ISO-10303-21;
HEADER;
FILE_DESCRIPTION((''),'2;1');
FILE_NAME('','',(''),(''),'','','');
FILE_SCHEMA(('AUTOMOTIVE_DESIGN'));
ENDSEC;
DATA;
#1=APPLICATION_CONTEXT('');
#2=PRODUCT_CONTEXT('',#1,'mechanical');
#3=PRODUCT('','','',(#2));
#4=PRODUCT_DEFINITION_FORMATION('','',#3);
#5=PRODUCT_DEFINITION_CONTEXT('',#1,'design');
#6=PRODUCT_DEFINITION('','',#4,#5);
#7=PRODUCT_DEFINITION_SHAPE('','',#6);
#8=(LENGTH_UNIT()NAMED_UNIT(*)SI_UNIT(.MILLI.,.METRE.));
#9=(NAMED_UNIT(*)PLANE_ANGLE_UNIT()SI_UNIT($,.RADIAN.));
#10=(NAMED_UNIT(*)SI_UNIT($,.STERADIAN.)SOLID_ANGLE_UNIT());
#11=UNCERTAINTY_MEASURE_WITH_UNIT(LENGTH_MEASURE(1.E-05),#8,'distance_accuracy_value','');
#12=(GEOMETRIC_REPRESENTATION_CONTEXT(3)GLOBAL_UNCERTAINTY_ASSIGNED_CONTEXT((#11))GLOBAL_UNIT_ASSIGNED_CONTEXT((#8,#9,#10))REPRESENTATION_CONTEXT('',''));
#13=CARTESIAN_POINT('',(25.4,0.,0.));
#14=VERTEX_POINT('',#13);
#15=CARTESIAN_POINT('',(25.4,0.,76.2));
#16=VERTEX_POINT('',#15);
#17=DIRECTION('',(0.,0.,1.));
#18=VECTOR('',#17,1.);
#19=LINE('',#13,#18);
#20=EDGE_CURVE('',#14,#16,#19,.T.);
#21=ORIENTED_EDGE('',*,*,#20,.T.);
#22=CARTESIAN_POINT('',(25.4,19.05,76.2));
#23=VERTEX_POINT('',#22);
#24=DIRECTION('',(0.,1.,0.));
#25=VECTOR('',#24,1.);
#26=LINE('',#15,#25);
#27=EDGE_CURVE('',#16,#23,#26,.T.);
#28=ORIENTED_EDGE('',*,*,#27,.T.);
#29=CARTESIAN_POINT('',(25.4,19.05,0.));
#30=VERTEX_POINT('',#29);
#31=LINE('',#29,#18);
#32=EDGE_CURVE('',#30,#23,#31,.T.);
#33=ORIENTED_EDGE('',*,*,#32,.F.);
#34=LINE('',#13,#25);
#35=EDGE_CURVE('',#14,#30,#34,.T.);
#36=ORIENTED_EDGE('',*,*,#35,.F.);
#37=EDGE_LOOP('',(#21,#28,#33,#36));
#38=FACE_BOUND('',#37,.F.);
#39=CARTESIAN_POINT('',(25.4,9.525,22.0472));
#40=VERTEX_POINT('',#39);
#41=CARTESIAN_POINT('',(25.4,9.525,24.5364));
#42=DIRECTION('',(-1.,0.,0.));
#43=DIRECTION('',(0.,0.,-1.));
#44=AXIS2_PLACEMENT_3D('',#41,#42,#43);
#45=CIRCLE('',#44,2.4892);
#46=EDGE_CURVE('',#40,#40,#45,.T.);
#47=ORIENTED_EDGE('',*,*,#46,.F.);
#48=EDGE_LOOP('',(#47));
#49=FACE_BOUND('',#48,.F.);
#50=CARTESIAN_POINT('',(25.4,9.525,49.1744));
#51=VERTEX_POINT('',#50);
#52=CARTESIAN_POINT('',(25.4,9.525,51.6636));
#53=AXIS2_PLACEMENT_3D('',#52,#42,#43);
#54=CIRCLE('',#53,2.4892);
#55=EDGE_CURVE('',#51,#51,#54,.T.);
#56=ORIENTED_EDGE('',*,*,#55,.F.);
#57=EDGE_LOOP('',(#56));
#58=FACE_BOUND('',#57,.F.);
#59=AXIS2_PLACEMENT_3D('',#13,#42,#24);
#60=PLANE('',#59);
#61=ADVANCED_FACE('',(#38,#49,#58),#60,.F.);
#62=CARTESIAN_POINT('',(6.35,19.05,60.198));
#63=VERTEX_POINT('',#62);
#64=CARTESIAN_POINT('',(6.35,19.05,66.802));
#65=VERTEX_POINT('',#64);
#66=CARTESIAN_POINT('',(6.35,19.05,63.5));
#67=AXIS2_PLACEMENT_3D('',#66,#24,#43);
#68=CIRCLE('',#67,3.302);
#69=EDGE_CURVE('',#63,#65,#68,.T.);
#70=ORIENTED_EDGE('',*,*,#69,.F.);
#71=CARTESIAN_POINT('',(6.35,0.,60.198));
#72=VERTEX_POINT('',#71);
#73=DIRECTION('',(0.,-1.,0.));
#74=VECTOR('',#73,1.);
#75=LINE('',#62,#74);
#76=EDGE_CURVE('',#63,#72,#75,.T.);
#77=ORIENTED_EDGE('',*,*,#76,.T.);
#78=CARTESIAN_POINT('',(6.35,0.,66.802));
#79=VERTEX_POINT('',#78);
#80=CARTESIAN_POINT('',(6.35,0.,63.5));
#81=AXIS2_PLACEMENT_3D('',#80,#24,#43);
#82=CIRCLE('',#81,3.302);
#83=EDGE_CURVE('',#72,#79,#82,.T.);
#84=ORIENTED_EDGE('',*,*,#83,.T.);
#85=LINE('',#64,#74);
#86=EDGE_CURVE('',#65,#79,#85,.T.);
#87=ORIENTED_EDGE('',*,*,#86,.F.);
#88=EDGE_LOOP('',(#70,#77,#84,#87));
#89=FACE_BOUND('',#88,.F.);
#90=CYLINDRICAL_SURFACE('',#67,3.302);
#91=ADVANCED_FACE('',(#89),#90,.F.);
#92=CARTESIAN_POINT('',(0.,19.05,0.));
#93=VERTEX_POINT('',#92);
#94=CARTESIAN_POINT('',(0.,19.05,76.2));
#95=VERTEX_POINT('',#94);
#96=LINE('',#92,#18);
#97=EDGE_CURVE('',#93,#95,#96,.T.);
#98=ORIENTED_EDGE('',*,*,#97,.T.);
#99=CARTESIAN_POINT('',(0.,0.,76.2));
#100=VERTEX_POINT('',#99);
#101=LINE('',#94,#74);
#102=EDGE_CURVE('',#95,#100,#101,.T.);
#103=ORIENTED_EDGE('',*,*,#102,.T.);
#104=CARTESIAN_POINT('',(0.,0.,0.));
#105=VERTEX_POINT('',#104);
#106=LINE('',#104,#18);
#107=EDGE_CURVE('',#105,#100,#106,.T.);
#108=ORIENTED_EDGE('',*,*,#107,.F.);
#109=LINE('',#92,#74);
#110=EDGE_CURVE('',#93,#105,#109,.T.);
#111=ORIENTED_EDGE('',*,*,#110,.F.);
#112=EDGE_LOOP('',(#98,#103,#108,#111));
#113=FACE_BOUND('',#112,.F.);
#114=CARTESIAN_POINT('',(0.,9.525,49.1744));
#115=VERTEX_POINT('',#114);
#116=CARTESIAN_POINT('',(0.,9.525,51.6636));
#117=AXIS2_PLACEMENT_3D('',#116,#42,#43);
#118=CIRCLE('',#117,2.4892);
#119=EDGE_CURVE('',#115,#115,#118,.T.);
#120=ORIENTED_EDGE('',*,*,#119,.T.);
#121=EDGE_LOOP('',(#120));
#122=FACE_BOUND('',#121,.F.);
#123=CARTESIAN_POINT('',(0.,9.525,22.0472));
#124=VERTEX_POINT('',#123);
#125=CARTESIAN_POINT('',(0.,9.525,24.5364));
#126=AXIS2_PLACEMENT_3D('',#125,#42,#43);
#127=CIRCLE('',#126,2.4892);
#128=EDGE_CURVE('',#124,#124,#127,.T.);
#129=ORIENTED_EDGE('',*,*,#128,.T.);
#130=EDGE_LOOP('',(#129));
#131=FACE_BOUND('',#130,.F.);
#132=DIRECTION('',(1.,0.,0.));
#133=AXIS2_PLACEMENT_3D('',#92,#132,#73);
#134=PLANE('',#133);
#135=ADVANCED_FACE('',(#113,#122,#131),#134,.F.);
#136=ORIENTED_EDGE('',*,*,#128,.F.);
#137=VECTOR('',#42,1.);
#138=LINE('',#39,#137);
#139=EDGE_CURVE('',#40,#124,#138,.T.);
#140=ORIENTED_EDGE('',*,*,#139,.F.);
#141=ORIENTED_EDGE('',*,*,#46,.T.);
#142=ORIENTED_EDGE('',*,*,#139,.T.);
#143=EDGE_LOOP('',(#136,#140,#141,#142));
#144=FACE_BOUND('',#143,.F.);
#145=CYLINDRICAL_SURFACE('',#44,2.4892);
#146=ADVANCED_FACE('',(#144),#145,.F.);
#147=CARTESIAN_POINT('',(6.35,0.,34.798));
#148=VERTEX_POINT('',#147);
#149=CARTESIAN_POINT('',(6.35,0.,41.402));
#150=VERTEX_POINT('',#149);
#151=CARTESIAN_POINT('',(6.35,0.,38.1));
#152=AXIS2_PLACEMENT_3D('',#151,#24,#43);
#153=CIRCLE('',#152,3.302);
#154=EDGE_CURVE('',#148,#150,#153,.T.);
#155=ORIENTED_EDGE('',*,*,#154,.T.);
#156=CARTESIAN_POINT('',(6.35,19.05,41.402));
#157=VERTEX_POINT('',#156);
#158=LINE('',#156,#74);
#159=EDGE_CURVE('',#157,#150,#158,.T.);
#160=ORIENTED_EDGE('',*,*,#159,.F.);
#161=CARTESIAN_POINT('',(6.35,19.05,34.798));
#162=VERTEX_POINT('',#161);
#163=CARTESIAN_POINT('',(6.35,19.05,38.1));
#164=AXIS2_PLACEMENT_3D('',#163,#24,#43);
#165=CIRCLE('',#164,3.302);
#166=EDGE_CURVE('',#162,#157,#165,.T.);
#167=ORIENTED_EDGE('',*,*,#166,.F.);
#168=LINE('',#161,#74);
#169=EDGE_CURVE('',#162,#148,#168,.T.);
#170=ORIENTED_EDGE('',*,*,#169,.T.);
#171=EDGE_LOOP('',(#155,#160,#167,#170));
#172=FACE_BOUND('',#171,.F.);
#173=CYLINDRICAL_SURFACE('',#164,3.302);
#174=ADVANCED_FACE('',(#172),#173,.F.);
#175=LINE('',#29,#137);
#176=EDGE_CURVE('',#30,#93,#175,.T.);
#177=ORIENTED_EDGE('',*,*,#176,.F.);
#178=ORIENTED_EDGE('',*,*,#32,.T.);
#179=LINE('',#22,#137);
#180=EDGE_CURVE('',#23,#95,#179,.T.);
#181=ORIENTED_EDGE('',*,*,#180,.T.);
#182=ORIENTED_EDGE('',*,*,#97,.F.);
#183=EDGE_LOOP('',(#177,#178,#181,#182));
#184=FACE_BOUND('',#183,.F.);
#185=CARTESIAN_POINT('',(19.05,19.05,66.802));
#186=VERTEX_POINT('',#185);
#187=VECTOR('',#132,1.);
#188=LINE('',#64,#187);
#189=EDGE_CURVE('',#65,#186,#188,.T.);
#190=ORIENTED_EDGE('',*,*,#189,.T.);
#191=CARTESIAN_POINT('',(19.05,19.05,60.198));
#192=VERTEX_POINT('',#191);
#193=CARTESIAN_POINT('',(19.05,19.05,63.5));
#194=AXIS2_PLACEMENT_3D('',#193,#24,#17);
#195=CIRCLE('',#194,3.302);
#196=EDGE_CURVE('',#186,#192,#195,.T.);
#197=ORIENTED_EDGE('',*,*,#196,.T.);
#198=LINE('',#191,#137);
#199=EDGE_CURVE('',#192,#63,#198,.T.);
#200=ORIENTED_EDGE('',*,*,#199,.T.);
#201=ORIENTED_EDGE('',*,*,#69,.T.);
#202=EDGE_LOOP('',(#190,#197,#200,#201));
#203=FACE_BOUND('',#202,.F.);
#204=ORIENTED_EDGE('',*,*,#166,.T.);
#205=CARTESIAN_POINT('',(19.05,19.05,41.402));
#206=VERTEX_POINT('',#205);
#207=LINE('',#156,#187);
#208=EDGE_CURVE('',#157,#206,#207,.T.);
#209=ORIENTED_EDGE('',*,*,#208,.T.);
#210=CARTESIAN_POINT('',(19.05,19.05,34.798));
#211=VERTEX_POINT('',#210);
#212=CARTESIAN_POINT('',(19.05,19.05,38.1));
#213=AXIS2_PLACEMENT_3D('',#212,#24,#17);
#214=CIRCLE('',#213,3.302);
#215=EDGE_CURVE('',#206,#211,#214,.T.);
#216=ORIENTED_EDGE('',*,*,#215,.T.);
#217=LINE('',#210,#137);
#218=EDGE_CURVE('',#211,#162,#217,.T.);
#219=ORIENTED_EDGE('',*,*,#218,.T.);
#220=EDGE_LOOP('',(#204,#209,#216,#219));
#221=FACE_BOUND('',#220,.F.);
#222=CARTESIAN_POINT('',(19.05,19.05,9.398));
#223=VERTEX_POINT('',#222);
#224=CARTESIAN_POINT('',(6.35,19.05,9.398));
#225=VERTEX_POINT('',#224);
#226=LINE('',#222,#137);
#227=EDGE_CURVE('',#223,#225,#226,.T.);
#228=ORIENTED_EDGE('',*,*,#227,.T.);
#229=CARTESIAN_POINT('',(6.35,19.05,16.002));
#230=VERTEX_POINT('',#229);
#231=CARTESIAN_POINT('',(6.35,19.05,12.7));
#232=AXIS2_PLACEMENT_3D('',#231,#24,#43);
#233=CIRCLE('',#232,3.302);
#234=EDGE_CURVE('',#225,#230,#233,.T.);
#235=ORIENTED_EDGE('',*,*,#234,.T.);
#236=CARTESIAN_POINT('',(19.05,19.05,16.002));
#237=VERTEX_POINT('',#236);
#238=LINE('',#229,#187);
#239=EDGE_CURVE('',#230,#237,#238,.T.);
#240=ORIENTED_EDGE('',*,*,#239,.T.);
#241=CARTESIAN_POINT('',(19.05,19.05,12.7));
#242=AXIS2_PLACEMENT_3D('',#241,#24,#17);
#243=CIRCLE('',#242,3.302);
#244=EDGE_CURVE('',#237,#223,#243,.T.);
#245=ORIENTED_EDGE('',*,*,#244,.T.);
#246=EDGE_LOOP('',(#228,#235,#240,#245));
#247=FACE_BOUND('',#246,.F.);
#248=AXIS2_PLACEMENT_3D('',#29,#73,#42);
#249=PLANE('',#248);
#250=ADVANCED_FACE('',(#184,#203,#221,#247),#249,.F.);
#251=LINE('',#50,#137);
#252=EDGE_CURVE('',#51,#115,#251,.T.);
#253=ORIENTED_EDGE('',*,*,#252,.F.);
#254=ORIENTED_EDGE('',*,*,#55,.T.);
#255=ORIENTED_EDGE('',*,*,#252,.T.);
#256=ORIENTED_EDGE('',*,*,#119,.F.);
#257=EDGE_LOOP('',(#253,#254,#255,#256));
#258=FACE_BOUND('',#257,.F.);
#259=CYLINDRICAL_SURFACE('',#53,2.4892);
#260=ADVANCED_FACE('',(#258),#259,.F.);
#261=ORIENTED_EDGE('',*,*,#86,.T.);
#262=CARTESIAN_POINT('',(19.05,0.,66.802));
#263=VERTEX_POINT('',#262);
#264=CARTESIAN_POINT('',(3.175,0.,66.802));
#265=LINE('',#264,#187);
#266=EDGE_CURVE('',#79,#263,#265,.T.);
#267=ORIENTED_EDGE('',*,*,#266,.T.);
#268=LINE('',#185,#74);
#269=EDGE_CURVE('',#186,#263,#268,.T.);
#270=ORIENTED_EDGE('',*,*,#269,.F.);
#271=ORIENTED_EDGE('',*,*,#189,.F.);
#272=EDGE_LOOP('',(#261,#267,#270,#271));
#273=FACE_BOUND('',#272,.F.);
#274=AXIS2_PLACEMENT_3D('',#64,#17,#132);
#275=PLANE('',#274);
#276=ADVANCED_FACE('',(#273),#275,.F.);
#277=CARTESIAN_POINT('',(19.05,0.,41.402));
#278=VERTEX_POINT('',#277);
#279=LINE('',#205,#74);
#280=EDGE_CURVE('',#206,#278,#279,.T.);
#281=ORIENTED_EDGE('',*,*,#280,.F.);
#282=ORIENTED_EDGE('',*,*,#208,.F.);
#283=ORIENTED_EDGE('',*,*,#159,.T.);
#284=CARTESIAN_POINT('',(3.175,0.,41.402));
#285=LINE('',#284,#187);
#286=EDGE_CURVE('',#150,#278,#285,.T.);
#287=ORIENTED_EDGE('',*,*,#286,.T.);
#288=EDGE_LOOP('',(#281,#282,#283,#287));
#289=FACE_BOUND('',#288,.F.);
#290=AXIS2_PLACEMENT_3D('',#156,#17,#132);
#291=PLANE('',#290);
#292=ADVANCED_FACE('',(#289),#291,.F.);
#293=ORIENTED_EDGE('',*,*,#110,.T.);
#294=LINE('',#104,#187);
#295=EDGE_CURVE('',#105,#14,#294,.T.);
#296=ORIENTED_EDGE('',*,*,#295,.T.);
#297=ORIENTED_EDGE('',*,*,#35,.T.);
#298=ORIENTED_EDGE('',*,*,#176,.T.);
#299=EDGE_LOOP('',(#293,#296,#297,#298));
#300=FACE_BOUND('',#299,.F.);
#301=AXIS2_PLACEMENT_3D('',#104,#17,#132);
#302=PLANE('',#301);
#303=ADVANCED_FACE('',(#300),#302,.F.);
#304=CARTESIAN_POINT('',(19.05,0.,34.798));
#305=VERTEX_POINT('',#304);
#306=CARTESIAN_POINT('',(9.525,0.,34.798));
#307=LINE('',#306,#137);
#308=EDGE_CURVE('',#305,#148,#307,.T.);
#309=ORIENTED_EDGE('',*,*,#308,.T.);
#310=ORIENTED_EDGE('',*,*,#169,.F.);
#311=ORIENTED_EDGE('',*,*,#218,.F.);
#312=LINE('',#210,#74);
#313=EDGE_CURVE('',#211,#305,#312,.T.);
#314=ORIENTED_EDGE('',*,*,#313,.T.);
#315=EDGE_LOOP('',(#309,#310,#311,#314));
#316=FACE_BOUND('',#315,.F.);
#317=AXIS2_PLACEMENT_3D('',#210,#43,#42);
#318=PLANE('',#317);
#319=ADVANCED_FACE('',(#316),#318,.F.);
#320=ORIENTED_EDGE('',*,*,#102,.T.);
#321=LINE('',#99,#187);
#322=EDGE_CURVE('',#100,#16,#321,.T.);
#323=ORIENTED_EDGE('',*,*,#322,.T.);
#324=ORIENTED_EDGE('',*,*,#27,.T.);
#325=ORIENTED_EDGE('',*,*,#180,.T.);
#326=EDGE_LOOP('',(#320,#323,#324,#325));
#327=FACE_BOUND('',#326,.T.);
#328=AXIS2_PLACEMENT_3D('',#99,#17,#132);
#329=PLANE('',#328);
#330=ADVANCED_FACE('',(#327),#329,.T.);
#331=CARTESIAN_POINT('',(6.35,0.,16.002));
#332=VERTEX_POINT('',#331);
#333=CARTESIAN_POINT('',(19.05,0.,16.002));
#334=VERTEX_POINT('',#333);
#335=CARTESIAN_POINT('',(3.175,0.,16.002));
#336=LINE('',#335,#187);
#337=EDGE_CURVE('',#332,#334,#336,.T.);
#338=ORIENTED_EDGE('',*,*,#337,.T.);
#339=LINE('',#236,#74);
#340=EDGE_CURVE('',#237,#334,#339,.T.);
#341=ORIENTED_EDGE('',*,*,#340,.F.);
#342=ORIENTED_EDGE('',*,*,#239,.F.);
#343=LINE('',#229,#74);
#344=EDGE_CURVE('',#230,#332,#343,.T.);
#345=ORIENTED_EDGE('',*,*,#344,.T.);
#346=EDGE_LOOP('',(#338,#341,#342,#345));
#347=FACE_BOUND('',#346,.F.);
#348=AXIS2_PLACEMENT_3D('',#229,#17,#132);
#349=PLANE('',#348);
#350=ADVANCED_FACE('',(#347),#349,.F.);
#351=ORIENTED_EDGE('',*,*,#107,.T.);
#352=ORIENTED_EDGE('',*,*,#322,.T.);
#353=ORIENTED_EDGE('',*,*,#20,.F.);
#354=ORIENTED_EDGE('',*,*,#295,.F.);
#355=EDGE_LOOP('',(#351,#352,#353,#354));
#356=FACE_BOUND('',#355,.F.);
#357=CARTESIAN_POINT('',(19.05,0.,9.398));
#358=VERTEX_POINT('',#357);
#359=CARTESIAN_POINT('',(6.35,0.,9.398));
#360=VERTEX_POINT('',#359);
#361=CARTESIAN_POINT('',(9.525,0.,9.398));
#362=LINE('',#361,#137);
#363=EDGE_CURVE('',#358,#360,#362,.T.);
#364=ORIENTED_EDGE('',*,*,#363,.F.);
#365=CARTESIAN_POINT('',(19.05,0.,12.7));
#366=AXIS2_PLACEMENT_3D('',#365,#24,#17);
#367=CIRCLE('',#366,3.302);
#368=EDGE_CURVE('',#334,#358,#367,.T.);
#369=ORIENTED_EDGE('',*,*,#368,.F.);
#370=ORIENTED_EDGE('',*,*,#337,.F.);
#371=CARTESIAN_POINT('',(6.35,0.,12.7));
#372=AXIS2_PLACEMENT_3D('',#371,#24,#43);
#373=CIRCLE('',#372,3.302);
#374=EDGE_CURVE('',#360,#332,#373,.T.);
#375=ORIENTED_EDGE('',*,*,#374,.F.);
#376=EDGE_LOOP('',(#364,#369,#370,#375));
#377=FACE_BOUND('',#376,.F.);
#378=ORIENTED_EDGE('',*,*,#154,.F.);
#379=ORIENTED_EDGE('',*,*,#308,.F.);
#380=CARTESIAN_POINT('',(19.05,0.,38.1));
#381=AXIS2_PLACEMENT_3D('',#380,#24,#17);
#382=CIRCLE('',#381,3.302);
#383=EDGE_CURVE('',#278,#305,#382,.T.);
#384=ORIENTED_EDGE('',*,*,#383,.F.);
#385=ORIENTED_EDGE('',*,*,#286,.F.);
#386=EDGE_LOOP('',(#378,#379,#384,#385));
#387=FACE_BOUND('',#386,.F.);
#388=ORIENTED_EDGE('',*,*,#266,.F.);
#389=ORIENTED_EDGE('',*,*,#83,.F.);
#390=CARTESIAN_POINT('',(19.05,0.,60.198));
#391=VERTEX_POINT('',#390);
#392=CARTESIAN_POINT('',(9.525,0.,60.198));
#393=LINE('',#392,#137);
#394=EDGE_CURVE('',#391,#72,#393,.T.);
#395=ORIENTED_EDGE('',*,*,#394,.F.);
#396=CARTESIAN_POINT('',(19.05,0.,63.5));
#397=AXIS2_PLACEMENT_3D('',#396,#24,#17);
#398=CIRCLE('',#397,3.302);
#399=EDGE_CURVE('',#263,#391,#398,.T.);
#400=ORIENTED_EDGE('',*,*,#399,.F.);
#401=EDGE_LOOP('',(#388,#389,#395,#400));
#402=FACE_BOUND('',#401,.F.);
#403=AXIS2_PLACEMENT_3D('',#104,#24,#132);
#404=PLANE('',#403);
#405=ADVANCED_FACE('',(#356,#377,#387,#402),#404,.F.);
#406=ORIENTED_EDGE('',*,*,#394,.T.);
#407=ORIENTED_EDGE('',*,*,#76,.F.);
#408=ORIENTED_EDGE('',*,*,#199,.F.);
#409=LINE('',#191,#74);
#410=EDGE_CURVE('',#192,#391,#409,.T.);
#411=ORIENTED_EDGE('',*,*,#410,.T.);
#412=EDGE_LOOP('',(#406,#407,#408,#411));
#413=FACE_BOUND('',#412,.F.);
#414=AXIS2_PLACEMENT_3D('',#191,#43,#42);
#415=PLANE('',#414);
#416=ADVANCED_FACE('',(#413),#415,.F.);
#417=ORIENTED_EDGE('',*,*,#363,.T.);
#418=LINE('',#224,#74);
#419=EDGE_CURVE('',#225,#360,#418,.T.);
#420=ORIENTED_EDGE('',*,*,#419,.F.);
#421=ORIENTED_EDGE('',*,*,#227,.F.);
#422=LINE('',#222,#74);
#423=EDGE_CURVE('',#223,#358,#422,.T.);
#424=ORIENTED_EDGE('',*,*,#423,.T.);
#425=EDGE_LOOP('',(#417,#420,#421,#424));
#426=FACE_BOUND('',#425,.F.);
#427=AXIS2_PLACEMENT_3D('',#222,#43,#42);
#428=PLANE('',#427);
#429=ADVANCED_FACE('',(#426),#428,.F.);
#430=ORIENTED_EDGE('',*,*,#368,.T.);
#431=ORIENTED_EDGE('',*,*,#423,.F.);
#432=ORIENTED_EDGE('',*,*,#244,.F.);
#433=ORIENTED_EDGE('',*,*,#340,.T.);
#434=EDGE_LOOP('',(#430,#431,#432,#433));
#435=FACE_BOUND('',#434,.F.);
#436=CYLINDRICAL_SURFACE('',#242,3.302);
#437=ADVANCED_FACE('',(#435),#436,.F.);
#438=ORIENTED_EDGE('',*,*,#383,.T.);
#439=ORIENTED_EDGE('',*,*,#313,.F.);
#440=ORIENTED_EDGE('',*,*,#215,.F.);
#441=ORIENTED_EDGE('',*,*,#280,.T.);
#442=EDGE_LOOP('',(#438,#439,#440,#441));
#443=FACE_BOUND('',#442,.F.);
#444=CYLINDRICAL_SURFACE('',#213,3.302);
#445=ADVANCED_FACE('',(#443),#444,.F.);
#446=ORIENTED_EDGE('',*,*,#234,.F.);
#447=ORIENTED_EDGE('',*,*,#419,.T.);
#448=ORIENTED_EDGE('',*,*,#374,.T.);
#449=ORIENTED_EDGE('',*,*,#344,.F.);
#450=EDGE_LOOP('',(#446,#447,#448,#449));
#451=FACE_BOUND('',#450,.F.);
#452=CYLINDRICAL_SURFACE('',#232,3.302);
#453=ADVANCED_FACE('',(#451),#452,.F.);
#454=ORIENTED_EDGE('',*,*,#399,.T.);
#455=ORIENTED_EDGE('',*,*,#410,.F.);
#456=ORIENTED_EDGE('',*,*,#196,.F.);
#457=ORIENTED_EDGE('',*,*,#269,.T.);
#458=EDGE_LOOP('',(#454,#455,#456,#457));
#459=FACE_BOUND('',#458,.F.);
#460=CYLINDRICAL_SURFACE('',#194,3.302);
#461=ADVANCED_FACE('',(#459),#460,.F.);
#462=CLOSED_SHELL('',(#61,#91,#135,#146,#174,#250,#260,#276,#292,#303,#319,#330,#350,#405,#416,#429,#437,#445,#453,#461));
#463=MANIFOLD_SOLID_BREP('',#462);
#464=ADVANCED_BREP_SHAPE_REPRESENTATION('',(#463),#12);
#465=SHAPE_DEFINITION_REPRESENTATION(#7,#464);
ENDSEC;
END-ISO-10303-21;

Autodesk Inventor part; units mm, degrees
ref_plane "YZ Plane" through (0, 0, 0) normal (1, 0, 0) x (0, 1, 0)
ref_plane "XZ Plane" through (0, 0, 0) normal (0, 1, 0) x (-1, 0, 0)
ref_plane "XY Plane" through (0, 0, 0) normal (0, 0, 1) x (1, 0, 0)
sketch "Sketch1" plane through (0, 0, 0) normal (0, 0, 1) x (1, 0, 0)
  line L0 (0, 0) -> (25.4, 0)
  line L1 (25.4, 0) -> (25.4, 19.05)
  line L2 (25.4, 19.05) -> (0, 19.05)
  line L3 (0, 19.05) -> (0, 0)
  dimension "d0" = 25.4
  dimension "d1" = 19.05
extrude "Stock Bar" add sketch "Sketch1" along normal blind 76.2
sketch "Sketch2" plane through (25.4, 0, 0) normal (1, 0, 0) x (0, 0, -1)
  line L0 (0, 0) -> (0, 19.05) projected
  line L1 (0, 19.05) -> (-76.2, 19.05) projected
  point P0 (-51.6636, 9.525)
  point P1 (-24.5364, 9.525)
  dimension "d4" = 27.1272
  dimension "d6" = 9.525
  dimension "d7" = 9.525
  dimension "d29" = 24.5364
hole "Motor Support Mounting Holes" at (25.4, 9.525, 51.6636) at (25.4, 9.525, 24.5364) direction (-1, 0, 0) diameter 4.9784 end up to surface thread size "1/4-20 UNC" class "2B" standard "ANSI Unified Screw Threads"
sketch "Sketch3" plane through (0, 19.05, 0) normal (0, 1, 0) x (1, 0, 0)
  line L0 (6.35, -12.7) -> (19.05, -12.7) construction
  line L1 (6.35, -16.002) -> (19.05, -16.002)
  line L2 (19.05, -9.398) -> (6.35, -9.398)
  arc A0 (6.35, -9.398) -> (6.35, -16.002) centre (6.35, -12.7) ccw
  arc A1 (19.05, -16.002) -> (19.05, -9.398) centre (19.05, -12.7) ccw
  line L3 (6.35, -63.5) -> (19.05, -63.5) construction
  line L4 (6.35, -66.802) -> (19.05, -66.802)
  line L5 (19.05, -60.198) -> (6.35, -60.198)
  arc A2 (6.35, -60.198) -> (6.35, -66.802) centre (6.35, -63.5) ccw
  arc A3 (19.05, -66.802) -> (19.05, -60.198) centre (19.05, -63.5) ccw
  line L6 (6.35, -38.1) -> (19.05, -38.1) construction
  line L7 (6.35, -41.402) -> (19.05, -41.402)
  line L8 (19.05, -34.798) -> (6.35, -34.798)
  arc A4 (6.35, -34.798) -> (6.35, -41.402) centre (6.35, -38.1) ccw
  arc A5 (19.05, -41.402) -> (19.05, -34.798) centre (19.05, -38.1) ccw
  line L9 (25.4, 0) -> (25.4, -76.2) projected
  line L10 (25.4, -76.2) -> (0, -76.2) projected
  point P0 (12.7, -12.7)
  point P1 (12.7, -63.5)
  point P2 (12.7, -38.1)
  dimension "d15" = 3.302
  dimension "d16" = 3.302
  dimension "d17" = 3.302
  dimension "d18" = 12.7
  dimension "d19" = 12.7
  dimension "d20" = 12.7
  dimension "d21" = 25.4
  dimension "d22" = 25.4
  dimension "d23" = 6.35
  dimension "d24" = 6.35
  dimension "d25" = 6.35
  dimension "d26" = 12.7
extrude "Table Mounting Slots" cut sketch "Sketch3" against normal blind 101.6
properties part number "Motor Base" material "Aluminum 6061"
